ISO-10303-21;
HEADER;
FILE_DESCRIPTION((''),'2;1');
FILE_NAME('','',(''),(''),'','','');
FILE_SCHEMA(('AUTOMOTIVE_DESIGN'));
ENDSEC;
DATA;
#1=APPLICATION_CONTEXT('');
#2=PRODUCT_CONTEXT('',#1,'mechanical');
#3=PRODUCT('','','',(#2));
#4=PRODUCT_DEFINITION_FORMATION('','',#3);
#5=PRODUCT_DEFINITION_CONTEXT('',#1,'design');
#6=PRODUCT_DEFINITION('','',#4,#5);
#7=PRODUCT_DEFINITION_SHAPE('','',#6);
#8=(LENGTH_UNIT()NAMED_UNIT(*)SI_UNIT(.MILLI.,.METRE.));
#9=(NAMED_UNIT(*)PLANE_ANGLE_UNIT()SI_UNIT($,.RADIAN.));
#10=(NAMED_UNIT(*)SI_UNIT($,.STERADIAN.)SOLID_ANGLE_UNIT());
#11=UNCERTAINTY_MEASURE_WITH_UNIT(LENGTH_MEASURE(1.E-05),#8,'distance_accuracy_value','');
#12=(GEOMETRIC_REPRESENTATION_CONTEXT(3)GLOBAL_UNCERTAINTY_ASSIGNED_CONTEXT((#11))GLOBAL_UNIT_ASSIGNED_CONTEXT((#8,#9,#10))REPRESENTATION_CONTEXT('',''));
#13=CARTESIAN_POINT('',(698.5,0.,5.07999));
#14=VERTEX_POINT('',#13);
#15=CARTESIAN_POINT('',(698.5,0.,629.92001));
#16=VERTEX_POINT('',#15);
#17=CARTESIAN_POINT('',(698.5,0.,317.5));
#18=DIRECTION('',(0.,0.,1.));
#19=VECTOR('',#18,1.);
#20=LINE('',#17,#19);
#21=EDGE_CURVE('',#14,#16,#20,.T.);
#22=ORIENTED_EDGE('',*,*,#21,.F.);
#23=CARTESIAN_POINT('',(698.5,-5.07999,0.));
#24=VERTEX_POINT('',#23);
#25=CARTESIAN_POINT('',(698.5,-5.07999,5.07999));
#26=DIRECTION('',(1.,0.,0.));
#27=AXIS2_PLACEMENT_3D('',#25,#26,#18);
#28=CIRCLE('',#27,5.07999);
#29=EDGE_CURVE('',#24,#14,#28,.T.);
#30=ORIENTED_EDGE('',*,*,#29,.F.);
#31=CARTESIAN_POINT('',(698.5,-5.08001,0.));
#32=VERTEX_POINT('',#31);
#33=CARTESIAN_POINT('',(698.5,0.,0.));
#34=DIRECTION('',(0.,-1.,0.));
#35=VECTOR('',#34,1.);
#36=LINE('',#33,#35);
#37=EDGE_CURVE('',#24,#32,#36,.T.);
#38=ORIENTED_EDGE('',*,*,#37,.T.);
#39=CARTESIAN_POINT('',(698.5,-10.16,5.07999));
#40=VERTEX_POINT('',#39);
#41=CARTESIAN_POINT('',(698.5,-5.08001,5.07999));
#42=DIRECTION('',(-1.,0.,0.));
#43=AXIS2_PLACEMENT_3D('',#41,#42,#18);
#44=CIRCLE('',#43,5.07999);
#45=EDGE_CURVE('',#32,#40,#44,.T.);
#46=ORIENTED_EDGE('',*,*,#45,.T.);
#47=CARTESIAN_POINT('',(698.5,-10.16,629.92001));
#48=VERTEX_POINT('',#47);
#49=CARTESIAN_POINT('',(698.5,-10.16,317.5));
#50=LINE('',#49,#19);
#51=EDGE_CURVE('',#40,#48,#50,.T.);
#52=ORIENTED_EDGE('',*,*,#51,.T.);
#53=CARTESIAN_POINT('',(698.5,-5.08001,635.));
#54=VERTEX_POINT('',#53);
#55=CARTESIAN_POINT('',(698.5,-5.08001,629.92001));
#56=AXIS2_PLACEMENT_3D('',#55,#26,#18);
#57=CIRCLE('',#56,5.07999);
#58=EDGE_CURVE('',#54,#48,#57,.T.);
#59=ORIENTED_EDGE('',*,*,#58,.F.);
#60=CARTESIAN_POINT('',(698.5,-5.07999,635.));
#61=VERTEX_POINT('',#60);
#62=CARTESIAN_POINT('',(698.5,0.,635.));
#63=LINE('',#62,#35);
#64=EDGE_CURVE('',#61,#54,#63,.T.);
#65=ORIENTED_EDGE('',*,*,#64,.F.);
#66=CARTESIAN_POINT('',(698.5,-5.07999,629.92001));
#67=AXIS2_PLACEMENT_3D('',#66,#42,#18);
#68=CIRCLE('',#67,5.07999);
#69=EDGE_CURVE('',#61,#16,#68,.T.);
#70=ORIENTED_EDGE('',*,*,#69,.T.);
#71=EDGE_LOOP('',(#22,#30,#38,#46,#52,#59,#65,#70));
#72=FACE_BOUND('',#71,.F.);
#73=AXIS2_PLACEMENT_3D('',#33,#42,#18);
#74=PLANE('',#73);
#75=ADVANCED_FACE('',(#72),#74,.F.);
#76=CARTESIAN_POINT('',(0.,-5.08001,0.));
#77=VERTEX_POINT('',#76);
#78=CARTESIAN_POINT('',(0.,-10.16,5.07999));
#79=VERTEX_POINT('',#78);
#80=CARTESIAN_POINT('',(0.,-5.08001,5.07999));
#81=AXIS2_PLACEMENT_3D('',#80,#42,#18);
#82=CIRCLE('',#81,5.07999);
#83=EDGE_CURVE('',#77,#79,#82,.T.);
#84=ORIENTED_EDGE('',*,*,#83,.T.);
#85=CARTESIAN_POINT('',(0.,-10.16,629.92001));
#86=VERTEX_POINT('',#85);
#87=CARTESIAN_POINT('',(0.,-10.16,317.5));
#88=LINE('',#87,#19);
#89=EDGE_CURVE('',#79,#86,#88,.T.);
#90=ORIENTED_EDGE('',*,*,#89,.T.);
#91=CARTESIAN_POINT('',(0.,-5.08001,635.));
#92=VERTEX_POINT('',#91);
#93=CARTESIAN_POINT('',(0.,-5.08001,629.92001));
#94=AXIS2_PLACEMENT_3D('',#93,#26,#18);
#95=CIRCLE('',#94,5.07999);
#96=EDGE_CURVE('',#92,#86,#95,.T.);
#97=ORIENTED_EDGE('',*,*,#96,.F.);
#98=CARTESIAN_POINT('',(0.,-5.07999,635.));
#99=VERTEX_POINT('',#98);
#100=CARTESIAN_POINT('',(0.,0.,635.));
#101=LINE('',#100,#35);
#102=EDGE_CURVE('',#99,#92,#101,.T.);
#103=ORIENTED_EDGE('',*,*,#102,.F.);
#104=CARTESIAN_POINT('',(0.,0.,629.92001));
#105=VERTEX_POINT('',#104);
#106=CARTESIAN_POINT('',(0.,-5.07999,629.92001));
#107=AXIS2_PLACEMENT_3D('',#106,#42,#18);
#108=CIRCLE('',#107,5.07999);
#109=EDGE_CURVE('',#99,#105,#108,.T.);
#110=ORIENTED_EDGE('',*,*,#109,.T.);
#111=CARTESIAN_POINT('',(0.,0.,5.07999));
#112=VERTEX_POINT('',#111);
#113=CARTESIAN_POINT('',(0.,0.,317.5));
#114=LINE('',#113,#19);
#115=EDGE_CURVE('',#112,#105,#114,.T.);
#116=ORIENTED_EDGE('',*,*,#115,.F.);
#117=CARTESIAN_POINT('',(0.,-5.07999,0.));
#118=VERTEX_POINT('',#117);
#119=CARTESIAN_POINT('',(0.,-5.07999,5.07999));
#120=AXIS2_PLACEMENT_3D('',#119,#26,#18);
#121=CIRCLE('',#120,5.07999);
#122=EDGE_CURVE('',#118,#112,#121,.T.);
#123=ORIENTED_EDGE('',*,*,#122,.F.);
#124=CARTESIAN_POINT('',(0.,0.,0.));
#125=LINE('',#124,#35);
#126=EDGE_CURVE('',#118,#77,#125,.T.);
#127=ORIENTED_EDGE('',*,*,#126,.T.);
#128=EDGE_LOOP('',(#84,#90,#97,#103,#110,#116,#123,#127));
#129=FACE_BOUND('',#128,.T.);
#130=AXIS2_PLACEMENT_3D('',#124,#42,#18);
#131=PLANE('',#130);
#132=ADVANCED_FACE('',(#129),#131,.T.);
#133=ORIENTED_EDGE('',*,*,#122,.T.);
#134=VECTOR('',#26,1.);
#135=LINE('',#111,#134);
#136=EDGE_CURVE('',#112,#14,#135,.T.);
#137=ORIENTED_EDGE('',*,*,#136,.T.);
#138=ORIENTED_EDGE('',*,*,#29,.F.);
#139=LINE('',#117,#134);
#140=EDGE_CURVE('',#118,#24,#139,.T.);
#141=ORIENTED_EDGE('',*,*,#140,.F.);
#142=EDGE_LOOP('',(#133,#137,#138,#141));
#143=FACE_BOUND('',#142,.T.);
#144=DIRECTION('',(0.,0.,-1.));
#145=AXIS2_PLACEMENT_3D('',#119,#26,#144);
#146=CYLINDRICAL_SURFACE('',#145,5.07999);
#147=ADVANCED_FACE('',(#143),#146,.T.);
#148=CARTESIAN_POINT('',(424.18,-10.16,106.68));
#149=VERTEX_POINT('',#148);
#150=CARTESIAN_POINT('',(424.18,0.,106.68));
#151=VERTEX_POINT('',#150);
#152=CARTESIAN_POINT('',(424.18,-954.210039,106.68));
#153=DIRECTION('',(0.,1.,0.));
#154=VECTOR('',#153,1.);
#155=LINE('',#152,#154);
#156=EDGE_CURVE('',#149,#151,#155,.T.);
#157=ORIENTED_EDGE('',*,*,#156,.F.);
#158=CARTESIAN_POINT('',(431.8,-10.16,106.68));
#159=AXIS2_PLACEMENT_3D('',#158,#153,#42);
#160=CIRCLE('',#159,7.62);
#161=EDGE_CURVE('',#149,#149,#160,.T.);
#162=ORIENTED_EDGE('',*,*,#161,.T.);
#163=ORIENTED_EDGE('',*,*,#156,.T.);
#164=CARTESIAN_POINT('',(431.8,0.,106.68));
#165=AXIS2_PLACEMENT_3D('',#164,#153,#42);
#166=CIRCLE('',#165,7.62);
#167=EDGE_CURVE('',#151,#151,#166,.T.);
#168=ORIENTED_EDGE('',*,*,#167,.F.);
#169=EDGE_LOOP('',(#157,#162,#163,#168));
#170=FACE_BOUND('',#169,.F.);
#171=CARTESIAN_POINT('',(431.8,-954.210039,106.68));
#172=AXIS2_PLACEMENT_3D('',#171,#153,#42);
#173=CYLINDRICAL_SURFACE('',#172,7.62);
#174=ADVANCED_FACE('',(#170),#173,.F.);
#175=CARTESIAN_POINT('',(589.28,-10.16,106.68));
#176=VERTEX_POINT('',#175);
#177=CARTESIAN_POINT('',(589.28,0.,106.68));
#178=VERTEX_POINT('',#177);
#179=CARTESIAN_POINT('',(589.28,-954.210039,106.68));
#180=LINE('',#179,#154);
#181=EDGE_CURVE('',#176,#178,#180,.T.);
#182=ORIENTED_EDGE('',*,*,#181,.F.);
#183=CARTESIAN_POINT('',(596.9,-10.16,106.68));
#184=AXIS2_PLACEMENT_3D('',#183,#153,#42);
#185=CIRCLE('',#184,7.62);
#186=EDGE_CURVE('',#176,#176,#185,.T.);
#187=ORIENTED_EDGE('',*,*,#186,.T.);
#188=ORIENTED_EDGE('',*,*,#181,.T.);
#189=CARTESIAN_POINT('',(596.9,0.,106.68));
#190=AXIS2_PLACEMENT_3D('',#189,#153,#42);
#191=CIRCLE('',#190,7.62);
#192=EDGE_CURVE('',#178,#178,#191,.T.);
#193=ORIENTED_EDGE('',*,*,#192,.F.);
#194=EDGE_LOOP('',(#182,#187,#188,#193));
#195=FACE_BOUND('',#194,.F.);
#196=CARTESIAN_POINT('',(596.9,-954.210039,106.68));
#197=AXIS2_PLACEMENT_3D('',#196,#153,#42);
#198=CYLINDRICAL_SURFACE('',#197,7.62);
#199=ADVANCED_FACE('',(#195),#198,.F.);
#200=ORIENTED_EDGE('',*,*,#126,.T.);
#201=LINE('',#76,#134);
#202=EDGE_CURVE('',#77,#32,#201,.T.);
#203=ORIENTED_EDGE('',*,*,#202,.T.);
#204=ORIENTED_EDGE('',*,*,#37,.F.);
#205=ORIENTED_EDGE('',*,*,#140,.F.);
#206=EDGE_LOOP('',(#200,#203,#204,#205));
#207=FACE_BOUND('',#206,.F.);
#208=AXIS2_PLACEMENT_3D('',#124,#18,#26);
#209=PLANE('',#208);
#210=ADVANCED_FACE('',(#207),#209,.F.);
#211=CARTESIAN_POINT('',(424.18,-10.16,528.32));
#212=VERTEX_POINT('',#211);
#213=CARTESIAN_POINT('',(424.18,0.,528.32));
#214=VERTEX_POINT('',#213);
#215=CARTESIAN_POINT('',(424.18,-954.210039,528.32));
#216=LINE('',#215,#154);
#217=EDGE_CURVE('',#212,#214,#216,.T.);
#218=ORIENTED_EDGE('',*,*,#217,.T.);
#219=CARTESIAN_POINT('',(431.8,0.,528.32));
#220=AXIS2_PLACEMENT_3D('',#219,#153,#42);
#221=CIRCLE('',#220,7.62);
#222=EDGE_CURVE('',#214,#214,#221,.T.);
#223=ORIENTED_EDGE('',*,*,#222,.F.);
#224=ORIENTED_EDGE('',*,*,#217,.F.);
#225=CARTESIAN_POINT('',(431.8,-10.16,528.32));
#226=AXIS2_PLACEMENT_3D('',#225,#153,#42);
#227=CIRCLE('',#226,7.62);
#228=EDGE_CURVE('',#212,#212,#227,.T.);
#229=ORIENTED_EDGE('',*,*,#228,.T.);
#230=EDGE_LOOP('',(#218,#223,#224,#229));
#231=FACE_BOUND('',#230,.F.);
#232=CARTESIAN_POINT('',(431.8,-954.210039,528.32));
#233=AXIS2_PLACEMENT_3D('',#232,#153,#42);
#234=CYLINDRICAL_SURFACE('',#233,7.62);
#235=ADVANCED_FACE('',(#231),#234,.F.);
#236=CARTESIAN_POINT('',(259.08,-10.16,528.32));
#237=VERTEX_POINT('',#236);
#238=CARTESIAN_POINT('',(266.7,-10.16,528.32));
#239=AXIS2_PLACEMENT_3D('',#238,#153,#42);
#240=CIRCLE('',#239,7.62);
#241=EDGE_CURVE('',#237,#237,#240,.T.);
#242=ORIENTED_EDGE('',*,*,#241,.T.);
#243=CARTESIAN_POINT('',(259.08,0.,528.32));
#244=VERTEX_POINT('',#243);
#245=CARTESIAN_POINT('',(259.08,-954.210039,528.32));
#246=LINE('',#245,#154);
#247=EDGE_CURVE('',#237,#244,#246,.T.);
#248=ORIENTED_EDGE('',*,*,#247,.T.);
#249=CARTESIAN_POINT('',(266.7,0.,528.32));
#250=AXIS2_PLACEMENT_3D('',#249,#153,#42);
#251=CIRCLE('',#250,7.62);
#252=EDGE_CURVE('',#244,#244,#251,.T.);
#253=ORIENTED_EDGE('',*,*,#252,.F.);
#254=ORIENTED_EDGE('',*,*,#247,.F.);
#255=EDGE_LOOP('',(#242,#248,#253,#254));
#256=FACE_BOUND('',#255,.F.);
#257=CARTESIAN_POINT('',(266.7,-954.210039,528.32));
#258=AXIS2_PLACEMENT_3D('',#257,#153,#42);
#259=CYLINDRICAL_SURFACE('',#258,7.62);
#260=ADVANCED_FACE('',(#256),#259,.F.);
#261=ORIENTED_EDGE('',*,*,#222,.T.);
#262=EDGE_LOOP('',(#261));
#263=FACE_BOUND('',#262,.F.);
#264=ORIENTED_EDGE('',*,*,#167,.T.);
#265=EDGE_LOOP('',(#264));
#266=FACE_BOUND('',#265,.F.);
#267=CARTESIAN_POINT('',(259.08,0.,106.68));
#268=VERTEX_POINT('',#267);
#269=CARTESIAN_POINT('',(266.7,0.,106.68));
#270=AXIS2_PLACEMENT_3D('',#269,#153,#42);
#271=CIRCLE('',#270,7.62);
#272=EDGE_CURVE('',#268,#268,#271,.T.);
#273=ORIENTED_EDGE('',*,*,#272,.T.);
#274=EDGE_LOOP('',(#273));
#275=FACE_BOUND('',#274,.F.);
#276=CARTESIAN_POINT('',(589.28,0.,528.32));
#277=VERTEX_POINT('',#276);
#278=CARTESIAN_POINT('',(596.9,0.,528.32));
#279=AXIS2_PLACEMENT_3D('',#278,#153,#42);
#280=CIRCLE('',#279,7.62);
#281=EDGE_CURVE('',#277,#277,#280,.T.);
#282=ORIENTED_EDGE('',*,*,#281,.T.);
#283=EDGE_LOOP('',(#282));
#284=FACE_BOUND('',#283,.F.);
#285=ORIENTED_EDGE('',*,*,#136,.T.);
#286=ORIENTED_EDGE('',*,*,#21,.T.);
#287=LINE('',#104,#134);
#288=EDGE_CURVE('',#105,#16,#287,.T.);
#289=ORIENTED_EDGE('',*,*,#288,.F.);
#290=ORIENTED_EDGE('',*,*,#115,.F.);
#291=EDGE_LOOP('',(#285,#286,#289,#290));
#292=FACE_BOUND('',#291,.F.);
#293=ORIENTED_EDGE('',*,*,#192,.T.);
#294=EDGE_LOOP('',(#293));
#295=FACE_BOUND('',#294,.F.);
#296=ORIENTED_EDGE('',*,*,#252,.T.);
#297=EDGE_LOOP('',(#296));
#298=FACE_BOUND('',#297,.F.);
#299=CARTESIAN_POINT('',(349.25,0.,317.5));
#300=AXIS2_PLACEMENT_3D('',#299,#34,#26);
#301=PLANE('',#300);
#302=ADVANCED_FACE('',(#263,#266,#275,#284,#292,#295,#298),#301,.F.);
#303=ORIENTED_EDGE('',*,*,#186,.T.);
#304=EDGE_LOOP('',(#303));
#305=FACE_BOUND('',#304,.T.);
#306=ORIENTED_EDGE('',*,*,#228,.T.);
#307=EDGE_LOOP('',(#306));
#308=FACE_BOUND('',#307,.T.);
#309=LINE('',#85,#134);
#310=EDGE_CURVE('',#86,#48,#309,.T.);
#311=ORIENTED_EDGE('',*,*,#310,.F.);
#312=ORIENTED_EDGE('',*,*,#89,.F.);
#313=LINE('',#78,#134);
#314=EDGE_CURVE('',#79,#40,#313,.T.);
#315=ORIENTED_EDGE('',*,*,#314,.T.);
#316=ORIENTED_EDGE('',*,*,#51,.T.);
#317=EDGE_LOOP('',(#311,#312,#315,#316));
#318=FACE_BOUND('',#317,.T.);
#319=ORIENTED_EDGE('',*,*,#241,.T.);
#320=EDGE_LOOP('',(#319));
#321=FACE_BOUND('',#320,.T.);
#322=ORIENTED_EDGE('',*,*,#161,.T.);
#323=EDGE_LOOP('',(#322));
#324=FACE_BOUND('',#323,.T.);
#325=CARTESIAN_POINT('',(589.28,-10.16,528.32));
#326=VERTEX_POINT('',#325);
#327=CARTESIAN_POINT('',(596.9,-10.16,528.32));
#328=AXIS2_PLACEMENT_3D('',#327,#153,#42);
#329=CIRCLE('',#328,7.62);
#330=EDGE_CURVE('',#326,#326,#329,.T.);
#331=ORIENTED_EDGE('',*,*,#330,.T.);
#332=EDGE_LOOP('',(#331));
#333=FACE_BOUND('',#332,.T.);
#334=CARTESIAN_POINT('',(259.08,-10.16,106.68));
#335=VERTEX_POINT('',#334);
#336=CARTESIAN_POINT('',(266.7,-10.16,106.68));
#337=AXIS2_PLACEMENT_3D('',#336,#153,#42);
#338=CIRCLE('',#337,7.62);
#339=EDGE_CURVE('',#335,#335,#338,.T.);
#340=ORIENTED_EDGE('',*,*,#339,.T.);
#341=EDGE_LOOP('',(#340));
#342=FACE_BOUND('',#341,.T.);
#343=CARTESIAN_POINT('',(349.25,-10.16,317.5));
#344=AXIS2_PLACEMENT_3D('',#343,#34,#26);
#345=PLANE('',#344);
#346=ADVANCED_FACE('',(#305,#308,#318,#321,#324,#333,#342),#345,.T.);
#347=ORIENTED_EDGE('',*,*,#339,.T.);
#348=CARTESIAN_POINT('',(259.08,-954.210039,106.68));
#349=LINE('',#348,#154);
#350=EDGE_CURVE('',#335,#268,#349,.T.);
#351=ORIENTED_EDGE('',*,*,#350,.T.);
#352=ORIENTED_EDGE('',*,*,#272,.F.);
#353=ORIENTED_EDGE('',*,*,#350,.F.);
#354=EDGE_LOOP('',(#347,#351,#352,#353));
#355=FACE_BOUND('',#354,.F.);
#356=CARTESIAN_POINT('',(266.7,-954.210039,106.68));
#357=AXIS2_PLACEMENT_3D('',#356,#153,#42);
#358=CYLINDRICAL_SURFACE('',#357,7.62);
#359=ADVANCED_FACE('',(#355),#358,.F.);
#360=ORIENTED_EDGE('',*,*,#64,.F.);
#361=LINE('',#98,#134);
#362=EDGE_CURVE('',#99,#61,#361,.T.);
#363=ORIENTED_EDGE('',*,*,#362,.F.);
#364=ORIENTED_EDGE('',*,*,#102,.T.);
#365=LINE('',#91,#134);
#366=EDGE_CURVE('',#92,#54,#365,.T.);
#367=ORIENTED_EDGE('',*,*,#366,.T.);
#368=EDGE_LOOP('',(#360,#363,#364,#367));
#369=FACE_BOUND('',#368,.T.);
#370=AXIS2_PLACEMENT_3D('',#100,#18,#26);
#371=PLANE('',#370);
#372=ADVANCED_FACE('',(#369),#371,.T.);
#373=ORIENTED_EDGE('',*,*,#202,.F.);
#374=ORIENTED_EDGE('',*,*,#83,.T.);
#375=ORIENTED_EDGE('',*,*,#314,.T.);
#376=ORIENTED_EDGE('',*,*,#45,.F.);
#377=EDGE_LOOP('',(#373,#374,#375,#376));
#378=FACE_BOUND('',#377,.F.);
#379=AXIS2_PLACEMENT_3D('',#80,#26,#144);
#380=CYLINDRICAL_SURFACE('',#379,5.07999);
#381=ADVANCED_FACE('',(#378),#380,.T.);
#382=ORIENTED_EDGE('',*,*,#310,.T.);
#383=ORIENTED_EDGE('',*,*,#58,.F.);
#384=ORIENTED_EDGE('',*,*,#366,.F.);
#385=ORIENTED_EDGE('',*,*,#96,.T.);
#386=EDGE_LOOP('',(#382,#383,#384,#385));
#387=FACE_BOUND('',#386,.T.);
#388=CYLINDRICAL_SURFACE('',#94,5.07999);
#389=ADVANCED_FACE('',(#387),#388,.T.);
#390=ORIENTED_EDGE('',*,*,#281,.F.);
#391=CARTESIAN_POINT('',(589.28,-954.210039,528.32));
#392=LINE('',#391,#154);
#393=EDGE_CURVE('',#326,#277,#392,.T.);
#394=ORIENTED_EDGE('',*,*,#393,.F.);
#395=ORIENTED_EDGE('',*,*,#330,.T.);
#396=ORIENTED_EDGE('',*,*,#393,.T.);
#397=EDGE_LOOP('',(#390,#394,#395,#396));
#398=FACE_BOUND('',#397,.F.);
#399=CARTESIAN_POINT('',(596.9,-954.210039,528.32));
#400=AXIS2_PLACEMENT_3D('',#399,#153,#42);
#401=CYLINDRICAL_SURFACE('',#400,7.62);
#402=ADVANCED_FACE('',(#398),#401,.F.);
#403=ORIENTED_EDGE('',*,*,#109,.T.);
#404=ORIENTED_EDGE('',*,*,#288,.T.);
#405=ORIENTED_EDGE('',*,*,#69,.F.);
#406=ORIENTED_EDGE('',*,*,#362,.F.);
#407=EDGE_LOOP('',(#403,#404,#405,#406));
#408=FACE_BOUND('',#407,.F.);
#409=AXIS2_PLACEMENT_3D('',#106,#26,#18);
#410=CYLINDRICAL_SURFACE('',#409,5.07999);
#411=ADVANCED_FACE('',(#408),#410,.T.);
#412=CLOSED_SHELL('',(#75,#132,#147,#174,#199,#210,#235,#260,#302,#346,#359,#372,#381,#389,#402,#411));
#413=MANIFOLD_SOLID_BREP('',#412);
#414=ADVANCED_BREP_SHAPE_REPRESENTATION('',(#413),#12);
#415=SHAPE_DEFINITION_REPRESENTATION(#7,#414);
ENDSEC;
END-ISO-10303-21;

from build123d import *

# Parameters (mm, degrees)
F0_W     = 698.5
F0_H     = 635
F1_DEPTH = 10.16
F3_R     = 5.07999
F5_D     = 15.24


# Not quite as in the source:
# - a fillet or chamfer is up to 0.001 mm smaller than in the source, because OpenCascade refuses the exact size


with BuildPart() as f1:
    # F0 (on Front) → F1 (new body)
    with BuildSketch(Plane.XZ):
        with Locations((349.25, 317.5)):
            Rectangle(F0_W, F0_H)
    extrude(amount=F1_DEPTH)

    # F3 (radius 5.08 in the source; OpenCascade refuses exactly that, so slightly less here)
    f3_edges = [f1.edges().sort_by_distance(p)[0] for p in [
        (349.25, -10.16, 635),
        (349.25, 0, 635),
        (349.25, -10.16, 0),
        (349.25, 0, 0),
    ]]
    fillet(f3_edges, radius=F3_R)

    # F5 (through all)
    with Locations(Plane.XZ.offset(10.16)):
        with Locations((431.8, 528.32), (266.7, 528.32), (596.9, 528.32), (596.9, 106.68), (431.8, 106.68), (266.7, 106.68)):
            Hole(F5_D / 2)


solid = f1.part
